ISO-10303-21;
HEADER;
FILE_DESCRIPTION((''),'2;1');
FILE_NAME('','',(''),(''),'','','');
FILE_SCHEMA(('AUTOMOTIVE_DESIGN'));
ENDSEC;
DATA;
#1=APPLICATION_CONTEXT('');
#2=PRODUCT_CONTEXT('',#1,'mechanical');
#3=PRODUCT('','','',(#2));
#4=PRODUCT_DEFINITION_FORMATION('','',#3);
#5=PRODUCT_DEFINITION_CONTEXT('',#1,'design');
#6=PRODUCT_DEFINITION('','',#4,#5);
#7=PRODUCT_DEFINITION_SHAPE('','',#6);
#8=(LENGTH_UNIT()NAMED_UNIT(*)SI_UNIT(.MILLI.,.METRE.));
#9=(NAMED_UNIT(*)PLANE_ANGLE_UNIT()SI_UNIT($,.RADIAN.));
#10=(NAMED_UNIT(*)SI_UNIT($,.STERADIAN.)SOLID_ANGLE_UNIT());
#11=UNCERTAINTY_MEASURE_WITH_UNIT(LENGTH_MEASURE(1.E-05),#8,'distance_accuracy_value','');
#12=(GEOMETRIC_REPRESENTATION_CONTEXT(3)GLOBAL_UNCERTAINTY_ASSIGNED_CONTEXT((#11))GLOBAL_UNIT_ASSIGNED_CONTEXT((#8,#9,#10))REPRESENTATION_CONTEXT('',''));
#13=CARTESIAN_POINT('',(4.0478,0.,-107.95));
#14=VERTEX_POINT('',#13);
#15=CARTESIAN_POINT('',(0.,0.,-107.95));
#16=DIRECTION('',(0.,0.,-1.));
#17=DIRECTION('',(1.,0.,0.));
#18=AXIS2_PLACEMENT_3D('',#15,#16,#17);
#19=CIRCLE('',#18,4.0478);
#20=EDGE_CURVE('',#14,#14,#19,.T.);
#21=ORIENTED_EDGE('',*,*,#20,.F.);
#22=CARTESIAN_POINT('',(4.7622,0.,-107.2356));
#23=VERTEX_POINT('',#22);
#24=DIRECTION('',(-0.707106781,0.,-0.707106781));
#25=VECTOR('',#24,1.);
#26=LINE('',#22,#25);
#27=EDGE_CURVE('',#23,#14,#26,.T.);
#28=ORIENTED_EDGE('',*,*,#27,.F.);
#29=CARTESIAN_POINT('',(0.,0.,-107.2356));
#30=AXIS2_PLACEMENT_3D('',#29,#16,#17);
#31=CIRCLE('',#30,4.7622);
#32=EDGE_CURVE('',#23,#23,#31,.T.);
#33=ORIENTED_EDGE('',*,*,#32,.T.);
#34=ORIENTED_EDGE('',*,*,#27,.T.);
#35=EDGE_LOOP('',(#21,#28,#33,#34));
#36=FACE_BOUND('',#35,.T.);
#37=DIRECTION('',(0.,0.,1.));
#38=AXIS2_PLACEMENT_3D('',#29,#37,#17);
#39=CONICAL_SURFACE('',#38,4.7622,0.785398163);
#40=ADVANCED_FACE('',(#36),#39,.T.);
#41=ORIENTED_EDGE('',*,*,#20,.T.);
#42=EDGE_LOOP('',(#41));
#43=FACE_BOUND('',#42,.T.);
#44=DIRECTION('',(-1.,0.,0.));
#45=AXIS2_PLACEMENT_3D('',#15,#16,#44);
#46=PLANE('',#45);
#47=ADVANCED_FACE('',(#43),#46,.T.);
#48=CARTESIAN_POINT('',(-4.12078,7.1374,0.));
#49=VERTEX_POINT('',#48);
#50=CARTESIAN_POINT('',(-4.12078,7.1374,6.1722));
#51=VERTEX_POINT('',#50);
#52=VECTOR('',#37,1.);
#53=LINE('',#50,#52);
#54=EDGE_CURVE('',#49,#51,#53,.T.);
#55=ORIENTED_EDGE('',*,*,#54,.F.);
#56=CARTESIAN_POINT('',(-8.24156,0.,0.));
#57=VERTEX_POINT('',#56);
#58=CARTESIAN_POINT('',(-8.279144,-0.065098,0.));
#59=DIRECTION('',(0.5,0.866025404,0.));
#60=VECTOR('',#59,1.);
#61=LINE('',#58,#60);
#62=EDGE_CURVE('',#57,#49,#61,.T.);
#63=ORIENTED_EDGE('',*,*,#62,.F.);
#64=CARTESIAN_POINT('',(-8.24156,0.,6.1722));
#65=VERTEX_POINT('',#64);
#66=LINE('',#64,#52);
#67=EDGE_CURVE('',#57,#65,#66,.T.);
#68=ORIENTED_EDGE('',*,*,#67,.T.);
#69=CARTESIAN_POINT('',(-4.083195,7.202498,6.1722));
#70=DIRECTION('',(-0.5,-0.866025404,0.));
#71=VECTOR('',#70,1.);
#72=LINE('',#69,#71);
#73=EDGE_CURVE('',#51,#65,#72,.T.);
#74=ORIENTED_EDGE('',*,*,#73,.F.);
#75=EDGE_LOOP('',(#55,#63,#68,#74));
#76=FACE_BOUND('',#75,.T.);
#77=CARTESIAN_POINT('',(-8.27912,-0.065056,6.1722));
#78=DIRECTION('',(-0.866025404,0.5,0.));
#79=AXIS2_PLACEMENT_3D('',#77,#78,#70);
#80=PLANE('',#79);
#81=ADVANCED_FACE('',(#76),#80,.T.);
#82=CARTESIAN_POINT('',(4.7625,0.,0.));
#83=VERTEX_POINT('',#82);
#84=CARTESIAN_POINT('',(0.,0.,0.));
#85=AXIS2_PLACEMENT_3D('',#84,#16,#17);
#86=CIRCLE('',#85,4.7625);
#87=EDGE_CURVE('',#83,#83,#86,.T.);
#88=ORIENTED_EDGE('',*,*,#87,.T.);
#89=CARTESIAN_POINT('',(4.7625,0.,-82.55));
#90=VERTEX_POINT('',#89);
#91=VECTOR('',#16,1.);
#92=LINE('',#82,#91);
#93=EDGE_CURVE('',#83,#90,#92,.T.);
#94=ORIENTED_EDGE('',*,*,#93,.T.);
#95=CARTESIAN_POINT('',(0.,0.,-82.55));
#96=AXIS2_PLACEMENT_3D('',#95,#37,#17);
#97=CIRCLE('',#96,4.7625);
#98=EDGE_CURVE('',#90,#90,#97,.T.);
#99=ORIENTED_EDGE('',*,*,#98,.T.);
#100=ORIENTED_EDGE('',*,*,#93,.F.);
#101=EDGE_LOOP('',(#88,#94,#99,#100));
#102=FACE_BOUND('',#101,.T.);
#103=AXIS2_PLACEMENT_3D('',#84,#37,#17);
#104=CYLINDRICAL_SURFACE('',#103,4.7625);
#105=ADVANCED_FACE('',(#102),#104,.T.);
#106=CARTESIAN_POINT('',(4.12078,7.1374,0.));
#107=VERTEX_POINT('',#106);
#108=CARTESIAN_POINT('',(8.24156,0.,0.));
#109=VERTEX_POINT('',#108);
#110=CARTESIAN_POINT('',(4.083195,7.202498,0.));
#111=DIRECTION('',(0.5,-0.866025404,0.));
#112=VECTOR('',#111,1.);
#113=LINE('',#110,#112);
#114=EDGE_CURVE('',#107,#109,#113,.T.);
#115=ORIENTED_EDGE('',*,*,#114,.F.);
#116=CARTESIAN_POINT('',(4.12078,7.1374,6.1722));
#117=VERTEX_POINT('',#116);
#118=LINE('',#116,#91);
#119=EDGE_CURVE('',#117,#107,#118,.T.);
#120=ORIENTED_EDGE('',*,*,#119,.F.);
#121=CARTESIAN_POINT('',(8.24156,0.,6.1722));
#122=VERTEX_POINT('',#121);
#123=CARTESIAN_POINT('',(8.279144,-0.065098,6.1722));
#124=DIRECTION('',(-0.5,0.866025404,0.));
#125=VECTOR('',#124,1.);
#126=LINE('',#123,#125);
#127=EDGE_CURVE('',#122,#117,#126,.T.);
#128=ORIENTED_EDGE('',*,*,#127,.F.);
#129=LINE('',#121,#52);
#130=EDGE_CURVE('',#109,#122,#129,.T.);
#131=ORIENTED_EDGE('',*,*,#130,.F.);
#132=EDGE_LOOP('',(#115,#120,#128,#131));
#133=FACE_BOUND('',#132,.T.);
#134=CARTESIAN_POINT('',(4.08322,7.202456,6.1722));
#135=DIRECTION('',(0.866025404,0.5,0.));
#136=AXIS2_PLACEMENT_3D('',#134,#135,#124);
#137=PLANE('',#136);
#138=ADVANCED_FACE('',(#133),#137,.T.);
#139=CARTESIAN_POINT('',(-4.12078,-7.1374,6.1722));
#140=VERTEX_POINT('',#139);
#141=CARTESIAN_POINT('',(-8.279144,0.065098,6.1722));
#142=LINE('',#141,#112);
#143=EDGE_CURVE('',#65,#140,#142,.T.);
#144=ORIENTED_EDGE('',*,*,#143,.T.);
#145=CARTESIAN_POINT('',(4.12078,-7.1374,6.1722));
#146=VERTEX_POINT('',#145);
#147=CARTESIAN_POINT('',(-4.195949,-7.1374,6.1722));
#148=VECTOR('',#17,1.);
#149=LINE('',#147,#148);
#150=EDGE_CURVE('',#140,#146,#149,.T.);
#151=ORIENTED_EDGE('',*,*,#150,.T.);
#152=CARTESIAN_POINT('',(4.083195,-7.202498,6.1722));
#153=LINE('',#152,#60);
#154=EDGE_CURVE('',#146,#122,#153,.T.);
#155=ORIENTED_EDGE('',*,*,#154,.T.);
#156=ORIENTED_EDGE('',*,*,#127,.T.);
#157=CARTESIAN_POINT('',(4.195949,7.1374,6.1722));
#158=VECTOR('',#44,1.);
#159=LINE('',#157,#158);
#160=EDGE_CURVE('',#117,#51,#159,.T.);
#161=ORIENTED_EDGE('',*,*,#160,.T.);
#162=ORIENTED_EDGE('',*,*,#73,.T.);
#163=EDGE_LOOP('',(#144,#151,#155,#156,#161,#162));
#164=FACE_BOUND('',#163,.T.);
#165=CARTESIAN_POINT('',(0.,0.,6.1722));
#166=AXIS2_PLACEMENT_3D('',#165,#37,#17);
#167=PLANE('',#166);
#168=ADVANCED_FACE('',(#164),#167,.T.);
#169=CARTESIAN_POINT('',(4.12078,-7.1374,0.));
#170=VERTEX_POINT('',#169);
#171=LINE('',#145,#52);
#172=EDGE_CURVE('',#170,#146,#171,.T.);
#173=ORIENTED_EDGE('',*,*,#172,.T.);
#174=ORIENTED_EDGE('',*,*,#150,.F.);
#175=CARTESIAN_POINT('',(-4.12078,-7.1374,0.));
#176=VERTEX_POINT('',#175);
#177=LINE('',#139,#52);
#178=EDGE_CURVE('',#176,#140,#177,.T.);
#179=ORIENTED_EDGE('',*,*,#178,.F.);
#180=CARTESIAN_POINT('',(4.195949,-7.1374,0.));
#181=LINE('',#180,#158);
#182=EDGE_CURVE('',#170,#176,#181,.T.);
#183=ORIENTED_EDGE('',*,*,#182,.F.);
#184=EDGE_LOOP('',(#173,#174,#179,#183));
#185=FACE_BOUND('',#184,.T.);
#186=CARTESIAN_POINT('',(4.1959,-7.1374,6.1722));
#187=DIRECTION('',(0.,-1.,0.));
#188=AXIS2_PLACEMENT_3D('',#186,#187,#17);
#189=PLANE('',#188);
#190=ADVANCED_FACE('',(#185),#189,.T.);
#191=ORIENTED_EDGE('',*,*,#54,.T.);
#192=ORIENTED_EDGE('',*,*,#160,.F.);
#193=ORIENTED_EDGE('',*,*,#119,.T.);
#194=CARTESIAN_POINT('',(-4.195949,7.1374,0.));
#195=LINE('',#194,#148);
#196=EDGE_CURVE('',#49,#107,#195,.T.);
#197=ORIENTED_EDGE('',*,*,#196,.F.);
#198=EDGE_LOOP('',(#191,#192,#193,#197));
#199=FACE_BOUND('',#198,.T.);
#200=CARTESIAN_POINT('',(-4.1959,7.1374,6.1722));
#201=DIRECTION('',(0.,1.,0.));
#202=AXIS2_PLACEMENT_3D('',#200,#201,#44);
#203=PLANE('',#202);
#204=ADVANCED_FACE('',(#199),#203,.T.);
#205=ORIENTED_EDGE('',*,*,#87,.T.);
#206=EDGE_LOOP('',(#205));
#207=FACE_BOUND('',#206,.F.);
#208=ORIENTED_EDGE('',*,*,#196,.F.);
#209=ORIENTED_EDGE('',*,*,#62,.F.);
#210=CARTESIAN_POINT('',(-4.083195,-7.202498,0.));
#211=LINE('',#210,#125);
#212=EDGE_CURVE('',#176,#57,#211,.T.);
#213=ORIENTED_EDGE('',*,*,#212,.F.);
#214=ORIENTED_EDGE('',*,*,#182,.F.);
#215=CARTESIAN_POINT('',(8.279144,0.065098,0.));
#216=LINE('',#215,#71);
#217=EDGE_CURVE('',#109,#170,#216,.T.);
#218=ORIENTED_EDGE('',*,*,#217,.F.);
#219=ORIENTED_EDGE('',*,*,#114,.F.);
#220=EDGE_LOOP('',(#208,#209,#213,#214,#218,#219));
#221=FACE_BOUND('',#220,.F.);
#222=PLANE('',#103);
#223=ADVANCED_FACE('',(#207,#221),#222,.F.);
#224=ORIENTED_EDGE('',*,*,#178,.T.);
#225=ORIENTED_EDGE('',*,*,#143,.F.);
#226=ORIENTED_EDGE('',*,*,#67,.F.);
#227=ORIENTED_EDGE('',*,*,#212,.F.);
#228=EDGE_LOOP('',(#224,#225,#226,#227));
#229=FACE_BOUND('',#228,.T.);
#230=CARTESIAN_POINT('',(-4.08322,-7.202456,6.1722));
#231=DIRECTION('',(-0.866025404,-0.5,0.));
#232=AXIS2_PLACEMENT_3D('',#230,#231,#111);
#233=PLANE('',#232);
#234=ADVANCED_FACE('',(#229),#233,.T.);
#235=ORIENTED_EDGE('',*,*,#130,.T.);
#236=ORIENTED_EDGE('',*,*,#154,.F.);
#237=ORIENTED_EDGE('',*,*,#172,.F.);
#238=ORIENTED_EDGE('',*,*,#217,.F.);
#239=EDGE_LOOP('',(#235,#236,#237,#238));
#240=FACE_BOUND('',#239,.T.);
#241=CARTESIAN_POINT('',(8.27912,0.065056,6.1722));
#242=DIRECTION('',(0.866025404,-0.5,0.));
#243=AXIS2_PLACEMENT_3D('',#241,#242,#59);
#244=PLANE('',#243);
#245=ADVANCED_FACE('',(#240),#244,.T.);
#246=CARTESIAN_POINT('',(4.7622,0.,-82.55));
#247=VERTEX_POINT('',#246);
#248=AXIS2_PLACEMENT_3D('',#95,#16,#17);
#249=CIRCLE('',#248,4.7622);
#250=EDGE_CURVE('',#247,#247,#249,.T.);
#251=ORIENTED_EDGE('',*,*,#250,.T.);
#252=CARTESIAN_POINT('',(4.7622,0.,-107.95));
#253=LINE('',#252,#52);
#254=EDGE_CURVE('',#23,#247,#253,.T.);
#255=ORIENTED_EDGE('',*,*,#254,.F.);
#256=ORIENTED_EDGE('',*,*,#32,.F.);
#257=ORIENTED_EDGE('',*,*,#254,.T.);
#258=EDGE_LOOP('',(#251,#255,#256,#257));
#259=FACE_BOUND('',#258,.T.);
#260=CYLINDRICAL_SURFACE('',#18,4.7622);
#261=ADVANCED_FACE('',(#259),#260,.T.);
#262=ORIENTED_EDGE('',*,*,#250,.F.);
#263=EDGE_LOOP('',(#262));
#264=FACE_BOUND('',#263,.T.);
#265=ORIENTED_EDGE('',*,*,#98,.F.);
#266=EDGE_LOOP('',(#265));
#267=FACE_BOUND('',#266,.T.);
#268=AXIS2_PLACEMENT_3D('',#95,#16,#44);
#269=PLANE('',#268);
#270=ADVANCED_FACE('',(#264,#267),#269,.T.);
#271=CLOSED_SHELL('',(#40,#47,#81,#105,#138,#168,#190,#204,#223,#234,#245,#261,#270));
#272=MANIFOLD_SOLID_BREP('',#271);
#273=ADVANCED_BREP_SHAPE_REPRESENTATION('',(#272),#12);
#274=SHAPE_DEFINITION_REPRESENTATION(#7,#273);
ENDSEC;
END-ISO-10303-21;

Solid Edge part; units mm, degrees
sketch "Sketch1" plane through (0, 0, 0) normal (0, 0, 1) x (1, 0, 0)
  circle A0 centre (0, 0) radius 8.2794
  dimension "D1" = 16.5588
extrude "Protrusion1" add sketch "Sketch1" along normal blind 6.1722
sketch "Sketch2" plane through (0, 0, 0) normal (0, 0, -1) x (1, 0, 0)
  circle A0 centre (0, 0) radius 4.7625
extrude "Protrusion2" add sketch "Sketch2" along normal blind 107.95
sketch "Sketch3" plane through (0, 0, -107.95) normal (0, 0, -1) x (1, 0, 0)
  circle A0 centre (0, 0) radius 4.7622
extrude "Cutout1" cut sketch "Sketch3" against normal blind 25.4 flip side to cut
chamfer "Chamfer_1" distance 0.7144 angle 45 1 edges at (-4.7622, 0, -107.95)
sketch "Sketch4" plane through (0, 0, 6.1722) normal (0, 0, 1) x (1, 0, 0)
  line L0 (-4.1959, 7.1374) -> (4.1959, 7.1374)
  dimension "D1" = 14.2748
extrude "Cutout2" cut sketch "Sketch4" against normal up to next material side at (0, 7.1874, 6.1722)
pattern_circular "Pattern1" count 6 over 360 about axis through (0, 0, 6.1722) along (0, 0, 1) of "Cutout2"
properties part number "24109077"
